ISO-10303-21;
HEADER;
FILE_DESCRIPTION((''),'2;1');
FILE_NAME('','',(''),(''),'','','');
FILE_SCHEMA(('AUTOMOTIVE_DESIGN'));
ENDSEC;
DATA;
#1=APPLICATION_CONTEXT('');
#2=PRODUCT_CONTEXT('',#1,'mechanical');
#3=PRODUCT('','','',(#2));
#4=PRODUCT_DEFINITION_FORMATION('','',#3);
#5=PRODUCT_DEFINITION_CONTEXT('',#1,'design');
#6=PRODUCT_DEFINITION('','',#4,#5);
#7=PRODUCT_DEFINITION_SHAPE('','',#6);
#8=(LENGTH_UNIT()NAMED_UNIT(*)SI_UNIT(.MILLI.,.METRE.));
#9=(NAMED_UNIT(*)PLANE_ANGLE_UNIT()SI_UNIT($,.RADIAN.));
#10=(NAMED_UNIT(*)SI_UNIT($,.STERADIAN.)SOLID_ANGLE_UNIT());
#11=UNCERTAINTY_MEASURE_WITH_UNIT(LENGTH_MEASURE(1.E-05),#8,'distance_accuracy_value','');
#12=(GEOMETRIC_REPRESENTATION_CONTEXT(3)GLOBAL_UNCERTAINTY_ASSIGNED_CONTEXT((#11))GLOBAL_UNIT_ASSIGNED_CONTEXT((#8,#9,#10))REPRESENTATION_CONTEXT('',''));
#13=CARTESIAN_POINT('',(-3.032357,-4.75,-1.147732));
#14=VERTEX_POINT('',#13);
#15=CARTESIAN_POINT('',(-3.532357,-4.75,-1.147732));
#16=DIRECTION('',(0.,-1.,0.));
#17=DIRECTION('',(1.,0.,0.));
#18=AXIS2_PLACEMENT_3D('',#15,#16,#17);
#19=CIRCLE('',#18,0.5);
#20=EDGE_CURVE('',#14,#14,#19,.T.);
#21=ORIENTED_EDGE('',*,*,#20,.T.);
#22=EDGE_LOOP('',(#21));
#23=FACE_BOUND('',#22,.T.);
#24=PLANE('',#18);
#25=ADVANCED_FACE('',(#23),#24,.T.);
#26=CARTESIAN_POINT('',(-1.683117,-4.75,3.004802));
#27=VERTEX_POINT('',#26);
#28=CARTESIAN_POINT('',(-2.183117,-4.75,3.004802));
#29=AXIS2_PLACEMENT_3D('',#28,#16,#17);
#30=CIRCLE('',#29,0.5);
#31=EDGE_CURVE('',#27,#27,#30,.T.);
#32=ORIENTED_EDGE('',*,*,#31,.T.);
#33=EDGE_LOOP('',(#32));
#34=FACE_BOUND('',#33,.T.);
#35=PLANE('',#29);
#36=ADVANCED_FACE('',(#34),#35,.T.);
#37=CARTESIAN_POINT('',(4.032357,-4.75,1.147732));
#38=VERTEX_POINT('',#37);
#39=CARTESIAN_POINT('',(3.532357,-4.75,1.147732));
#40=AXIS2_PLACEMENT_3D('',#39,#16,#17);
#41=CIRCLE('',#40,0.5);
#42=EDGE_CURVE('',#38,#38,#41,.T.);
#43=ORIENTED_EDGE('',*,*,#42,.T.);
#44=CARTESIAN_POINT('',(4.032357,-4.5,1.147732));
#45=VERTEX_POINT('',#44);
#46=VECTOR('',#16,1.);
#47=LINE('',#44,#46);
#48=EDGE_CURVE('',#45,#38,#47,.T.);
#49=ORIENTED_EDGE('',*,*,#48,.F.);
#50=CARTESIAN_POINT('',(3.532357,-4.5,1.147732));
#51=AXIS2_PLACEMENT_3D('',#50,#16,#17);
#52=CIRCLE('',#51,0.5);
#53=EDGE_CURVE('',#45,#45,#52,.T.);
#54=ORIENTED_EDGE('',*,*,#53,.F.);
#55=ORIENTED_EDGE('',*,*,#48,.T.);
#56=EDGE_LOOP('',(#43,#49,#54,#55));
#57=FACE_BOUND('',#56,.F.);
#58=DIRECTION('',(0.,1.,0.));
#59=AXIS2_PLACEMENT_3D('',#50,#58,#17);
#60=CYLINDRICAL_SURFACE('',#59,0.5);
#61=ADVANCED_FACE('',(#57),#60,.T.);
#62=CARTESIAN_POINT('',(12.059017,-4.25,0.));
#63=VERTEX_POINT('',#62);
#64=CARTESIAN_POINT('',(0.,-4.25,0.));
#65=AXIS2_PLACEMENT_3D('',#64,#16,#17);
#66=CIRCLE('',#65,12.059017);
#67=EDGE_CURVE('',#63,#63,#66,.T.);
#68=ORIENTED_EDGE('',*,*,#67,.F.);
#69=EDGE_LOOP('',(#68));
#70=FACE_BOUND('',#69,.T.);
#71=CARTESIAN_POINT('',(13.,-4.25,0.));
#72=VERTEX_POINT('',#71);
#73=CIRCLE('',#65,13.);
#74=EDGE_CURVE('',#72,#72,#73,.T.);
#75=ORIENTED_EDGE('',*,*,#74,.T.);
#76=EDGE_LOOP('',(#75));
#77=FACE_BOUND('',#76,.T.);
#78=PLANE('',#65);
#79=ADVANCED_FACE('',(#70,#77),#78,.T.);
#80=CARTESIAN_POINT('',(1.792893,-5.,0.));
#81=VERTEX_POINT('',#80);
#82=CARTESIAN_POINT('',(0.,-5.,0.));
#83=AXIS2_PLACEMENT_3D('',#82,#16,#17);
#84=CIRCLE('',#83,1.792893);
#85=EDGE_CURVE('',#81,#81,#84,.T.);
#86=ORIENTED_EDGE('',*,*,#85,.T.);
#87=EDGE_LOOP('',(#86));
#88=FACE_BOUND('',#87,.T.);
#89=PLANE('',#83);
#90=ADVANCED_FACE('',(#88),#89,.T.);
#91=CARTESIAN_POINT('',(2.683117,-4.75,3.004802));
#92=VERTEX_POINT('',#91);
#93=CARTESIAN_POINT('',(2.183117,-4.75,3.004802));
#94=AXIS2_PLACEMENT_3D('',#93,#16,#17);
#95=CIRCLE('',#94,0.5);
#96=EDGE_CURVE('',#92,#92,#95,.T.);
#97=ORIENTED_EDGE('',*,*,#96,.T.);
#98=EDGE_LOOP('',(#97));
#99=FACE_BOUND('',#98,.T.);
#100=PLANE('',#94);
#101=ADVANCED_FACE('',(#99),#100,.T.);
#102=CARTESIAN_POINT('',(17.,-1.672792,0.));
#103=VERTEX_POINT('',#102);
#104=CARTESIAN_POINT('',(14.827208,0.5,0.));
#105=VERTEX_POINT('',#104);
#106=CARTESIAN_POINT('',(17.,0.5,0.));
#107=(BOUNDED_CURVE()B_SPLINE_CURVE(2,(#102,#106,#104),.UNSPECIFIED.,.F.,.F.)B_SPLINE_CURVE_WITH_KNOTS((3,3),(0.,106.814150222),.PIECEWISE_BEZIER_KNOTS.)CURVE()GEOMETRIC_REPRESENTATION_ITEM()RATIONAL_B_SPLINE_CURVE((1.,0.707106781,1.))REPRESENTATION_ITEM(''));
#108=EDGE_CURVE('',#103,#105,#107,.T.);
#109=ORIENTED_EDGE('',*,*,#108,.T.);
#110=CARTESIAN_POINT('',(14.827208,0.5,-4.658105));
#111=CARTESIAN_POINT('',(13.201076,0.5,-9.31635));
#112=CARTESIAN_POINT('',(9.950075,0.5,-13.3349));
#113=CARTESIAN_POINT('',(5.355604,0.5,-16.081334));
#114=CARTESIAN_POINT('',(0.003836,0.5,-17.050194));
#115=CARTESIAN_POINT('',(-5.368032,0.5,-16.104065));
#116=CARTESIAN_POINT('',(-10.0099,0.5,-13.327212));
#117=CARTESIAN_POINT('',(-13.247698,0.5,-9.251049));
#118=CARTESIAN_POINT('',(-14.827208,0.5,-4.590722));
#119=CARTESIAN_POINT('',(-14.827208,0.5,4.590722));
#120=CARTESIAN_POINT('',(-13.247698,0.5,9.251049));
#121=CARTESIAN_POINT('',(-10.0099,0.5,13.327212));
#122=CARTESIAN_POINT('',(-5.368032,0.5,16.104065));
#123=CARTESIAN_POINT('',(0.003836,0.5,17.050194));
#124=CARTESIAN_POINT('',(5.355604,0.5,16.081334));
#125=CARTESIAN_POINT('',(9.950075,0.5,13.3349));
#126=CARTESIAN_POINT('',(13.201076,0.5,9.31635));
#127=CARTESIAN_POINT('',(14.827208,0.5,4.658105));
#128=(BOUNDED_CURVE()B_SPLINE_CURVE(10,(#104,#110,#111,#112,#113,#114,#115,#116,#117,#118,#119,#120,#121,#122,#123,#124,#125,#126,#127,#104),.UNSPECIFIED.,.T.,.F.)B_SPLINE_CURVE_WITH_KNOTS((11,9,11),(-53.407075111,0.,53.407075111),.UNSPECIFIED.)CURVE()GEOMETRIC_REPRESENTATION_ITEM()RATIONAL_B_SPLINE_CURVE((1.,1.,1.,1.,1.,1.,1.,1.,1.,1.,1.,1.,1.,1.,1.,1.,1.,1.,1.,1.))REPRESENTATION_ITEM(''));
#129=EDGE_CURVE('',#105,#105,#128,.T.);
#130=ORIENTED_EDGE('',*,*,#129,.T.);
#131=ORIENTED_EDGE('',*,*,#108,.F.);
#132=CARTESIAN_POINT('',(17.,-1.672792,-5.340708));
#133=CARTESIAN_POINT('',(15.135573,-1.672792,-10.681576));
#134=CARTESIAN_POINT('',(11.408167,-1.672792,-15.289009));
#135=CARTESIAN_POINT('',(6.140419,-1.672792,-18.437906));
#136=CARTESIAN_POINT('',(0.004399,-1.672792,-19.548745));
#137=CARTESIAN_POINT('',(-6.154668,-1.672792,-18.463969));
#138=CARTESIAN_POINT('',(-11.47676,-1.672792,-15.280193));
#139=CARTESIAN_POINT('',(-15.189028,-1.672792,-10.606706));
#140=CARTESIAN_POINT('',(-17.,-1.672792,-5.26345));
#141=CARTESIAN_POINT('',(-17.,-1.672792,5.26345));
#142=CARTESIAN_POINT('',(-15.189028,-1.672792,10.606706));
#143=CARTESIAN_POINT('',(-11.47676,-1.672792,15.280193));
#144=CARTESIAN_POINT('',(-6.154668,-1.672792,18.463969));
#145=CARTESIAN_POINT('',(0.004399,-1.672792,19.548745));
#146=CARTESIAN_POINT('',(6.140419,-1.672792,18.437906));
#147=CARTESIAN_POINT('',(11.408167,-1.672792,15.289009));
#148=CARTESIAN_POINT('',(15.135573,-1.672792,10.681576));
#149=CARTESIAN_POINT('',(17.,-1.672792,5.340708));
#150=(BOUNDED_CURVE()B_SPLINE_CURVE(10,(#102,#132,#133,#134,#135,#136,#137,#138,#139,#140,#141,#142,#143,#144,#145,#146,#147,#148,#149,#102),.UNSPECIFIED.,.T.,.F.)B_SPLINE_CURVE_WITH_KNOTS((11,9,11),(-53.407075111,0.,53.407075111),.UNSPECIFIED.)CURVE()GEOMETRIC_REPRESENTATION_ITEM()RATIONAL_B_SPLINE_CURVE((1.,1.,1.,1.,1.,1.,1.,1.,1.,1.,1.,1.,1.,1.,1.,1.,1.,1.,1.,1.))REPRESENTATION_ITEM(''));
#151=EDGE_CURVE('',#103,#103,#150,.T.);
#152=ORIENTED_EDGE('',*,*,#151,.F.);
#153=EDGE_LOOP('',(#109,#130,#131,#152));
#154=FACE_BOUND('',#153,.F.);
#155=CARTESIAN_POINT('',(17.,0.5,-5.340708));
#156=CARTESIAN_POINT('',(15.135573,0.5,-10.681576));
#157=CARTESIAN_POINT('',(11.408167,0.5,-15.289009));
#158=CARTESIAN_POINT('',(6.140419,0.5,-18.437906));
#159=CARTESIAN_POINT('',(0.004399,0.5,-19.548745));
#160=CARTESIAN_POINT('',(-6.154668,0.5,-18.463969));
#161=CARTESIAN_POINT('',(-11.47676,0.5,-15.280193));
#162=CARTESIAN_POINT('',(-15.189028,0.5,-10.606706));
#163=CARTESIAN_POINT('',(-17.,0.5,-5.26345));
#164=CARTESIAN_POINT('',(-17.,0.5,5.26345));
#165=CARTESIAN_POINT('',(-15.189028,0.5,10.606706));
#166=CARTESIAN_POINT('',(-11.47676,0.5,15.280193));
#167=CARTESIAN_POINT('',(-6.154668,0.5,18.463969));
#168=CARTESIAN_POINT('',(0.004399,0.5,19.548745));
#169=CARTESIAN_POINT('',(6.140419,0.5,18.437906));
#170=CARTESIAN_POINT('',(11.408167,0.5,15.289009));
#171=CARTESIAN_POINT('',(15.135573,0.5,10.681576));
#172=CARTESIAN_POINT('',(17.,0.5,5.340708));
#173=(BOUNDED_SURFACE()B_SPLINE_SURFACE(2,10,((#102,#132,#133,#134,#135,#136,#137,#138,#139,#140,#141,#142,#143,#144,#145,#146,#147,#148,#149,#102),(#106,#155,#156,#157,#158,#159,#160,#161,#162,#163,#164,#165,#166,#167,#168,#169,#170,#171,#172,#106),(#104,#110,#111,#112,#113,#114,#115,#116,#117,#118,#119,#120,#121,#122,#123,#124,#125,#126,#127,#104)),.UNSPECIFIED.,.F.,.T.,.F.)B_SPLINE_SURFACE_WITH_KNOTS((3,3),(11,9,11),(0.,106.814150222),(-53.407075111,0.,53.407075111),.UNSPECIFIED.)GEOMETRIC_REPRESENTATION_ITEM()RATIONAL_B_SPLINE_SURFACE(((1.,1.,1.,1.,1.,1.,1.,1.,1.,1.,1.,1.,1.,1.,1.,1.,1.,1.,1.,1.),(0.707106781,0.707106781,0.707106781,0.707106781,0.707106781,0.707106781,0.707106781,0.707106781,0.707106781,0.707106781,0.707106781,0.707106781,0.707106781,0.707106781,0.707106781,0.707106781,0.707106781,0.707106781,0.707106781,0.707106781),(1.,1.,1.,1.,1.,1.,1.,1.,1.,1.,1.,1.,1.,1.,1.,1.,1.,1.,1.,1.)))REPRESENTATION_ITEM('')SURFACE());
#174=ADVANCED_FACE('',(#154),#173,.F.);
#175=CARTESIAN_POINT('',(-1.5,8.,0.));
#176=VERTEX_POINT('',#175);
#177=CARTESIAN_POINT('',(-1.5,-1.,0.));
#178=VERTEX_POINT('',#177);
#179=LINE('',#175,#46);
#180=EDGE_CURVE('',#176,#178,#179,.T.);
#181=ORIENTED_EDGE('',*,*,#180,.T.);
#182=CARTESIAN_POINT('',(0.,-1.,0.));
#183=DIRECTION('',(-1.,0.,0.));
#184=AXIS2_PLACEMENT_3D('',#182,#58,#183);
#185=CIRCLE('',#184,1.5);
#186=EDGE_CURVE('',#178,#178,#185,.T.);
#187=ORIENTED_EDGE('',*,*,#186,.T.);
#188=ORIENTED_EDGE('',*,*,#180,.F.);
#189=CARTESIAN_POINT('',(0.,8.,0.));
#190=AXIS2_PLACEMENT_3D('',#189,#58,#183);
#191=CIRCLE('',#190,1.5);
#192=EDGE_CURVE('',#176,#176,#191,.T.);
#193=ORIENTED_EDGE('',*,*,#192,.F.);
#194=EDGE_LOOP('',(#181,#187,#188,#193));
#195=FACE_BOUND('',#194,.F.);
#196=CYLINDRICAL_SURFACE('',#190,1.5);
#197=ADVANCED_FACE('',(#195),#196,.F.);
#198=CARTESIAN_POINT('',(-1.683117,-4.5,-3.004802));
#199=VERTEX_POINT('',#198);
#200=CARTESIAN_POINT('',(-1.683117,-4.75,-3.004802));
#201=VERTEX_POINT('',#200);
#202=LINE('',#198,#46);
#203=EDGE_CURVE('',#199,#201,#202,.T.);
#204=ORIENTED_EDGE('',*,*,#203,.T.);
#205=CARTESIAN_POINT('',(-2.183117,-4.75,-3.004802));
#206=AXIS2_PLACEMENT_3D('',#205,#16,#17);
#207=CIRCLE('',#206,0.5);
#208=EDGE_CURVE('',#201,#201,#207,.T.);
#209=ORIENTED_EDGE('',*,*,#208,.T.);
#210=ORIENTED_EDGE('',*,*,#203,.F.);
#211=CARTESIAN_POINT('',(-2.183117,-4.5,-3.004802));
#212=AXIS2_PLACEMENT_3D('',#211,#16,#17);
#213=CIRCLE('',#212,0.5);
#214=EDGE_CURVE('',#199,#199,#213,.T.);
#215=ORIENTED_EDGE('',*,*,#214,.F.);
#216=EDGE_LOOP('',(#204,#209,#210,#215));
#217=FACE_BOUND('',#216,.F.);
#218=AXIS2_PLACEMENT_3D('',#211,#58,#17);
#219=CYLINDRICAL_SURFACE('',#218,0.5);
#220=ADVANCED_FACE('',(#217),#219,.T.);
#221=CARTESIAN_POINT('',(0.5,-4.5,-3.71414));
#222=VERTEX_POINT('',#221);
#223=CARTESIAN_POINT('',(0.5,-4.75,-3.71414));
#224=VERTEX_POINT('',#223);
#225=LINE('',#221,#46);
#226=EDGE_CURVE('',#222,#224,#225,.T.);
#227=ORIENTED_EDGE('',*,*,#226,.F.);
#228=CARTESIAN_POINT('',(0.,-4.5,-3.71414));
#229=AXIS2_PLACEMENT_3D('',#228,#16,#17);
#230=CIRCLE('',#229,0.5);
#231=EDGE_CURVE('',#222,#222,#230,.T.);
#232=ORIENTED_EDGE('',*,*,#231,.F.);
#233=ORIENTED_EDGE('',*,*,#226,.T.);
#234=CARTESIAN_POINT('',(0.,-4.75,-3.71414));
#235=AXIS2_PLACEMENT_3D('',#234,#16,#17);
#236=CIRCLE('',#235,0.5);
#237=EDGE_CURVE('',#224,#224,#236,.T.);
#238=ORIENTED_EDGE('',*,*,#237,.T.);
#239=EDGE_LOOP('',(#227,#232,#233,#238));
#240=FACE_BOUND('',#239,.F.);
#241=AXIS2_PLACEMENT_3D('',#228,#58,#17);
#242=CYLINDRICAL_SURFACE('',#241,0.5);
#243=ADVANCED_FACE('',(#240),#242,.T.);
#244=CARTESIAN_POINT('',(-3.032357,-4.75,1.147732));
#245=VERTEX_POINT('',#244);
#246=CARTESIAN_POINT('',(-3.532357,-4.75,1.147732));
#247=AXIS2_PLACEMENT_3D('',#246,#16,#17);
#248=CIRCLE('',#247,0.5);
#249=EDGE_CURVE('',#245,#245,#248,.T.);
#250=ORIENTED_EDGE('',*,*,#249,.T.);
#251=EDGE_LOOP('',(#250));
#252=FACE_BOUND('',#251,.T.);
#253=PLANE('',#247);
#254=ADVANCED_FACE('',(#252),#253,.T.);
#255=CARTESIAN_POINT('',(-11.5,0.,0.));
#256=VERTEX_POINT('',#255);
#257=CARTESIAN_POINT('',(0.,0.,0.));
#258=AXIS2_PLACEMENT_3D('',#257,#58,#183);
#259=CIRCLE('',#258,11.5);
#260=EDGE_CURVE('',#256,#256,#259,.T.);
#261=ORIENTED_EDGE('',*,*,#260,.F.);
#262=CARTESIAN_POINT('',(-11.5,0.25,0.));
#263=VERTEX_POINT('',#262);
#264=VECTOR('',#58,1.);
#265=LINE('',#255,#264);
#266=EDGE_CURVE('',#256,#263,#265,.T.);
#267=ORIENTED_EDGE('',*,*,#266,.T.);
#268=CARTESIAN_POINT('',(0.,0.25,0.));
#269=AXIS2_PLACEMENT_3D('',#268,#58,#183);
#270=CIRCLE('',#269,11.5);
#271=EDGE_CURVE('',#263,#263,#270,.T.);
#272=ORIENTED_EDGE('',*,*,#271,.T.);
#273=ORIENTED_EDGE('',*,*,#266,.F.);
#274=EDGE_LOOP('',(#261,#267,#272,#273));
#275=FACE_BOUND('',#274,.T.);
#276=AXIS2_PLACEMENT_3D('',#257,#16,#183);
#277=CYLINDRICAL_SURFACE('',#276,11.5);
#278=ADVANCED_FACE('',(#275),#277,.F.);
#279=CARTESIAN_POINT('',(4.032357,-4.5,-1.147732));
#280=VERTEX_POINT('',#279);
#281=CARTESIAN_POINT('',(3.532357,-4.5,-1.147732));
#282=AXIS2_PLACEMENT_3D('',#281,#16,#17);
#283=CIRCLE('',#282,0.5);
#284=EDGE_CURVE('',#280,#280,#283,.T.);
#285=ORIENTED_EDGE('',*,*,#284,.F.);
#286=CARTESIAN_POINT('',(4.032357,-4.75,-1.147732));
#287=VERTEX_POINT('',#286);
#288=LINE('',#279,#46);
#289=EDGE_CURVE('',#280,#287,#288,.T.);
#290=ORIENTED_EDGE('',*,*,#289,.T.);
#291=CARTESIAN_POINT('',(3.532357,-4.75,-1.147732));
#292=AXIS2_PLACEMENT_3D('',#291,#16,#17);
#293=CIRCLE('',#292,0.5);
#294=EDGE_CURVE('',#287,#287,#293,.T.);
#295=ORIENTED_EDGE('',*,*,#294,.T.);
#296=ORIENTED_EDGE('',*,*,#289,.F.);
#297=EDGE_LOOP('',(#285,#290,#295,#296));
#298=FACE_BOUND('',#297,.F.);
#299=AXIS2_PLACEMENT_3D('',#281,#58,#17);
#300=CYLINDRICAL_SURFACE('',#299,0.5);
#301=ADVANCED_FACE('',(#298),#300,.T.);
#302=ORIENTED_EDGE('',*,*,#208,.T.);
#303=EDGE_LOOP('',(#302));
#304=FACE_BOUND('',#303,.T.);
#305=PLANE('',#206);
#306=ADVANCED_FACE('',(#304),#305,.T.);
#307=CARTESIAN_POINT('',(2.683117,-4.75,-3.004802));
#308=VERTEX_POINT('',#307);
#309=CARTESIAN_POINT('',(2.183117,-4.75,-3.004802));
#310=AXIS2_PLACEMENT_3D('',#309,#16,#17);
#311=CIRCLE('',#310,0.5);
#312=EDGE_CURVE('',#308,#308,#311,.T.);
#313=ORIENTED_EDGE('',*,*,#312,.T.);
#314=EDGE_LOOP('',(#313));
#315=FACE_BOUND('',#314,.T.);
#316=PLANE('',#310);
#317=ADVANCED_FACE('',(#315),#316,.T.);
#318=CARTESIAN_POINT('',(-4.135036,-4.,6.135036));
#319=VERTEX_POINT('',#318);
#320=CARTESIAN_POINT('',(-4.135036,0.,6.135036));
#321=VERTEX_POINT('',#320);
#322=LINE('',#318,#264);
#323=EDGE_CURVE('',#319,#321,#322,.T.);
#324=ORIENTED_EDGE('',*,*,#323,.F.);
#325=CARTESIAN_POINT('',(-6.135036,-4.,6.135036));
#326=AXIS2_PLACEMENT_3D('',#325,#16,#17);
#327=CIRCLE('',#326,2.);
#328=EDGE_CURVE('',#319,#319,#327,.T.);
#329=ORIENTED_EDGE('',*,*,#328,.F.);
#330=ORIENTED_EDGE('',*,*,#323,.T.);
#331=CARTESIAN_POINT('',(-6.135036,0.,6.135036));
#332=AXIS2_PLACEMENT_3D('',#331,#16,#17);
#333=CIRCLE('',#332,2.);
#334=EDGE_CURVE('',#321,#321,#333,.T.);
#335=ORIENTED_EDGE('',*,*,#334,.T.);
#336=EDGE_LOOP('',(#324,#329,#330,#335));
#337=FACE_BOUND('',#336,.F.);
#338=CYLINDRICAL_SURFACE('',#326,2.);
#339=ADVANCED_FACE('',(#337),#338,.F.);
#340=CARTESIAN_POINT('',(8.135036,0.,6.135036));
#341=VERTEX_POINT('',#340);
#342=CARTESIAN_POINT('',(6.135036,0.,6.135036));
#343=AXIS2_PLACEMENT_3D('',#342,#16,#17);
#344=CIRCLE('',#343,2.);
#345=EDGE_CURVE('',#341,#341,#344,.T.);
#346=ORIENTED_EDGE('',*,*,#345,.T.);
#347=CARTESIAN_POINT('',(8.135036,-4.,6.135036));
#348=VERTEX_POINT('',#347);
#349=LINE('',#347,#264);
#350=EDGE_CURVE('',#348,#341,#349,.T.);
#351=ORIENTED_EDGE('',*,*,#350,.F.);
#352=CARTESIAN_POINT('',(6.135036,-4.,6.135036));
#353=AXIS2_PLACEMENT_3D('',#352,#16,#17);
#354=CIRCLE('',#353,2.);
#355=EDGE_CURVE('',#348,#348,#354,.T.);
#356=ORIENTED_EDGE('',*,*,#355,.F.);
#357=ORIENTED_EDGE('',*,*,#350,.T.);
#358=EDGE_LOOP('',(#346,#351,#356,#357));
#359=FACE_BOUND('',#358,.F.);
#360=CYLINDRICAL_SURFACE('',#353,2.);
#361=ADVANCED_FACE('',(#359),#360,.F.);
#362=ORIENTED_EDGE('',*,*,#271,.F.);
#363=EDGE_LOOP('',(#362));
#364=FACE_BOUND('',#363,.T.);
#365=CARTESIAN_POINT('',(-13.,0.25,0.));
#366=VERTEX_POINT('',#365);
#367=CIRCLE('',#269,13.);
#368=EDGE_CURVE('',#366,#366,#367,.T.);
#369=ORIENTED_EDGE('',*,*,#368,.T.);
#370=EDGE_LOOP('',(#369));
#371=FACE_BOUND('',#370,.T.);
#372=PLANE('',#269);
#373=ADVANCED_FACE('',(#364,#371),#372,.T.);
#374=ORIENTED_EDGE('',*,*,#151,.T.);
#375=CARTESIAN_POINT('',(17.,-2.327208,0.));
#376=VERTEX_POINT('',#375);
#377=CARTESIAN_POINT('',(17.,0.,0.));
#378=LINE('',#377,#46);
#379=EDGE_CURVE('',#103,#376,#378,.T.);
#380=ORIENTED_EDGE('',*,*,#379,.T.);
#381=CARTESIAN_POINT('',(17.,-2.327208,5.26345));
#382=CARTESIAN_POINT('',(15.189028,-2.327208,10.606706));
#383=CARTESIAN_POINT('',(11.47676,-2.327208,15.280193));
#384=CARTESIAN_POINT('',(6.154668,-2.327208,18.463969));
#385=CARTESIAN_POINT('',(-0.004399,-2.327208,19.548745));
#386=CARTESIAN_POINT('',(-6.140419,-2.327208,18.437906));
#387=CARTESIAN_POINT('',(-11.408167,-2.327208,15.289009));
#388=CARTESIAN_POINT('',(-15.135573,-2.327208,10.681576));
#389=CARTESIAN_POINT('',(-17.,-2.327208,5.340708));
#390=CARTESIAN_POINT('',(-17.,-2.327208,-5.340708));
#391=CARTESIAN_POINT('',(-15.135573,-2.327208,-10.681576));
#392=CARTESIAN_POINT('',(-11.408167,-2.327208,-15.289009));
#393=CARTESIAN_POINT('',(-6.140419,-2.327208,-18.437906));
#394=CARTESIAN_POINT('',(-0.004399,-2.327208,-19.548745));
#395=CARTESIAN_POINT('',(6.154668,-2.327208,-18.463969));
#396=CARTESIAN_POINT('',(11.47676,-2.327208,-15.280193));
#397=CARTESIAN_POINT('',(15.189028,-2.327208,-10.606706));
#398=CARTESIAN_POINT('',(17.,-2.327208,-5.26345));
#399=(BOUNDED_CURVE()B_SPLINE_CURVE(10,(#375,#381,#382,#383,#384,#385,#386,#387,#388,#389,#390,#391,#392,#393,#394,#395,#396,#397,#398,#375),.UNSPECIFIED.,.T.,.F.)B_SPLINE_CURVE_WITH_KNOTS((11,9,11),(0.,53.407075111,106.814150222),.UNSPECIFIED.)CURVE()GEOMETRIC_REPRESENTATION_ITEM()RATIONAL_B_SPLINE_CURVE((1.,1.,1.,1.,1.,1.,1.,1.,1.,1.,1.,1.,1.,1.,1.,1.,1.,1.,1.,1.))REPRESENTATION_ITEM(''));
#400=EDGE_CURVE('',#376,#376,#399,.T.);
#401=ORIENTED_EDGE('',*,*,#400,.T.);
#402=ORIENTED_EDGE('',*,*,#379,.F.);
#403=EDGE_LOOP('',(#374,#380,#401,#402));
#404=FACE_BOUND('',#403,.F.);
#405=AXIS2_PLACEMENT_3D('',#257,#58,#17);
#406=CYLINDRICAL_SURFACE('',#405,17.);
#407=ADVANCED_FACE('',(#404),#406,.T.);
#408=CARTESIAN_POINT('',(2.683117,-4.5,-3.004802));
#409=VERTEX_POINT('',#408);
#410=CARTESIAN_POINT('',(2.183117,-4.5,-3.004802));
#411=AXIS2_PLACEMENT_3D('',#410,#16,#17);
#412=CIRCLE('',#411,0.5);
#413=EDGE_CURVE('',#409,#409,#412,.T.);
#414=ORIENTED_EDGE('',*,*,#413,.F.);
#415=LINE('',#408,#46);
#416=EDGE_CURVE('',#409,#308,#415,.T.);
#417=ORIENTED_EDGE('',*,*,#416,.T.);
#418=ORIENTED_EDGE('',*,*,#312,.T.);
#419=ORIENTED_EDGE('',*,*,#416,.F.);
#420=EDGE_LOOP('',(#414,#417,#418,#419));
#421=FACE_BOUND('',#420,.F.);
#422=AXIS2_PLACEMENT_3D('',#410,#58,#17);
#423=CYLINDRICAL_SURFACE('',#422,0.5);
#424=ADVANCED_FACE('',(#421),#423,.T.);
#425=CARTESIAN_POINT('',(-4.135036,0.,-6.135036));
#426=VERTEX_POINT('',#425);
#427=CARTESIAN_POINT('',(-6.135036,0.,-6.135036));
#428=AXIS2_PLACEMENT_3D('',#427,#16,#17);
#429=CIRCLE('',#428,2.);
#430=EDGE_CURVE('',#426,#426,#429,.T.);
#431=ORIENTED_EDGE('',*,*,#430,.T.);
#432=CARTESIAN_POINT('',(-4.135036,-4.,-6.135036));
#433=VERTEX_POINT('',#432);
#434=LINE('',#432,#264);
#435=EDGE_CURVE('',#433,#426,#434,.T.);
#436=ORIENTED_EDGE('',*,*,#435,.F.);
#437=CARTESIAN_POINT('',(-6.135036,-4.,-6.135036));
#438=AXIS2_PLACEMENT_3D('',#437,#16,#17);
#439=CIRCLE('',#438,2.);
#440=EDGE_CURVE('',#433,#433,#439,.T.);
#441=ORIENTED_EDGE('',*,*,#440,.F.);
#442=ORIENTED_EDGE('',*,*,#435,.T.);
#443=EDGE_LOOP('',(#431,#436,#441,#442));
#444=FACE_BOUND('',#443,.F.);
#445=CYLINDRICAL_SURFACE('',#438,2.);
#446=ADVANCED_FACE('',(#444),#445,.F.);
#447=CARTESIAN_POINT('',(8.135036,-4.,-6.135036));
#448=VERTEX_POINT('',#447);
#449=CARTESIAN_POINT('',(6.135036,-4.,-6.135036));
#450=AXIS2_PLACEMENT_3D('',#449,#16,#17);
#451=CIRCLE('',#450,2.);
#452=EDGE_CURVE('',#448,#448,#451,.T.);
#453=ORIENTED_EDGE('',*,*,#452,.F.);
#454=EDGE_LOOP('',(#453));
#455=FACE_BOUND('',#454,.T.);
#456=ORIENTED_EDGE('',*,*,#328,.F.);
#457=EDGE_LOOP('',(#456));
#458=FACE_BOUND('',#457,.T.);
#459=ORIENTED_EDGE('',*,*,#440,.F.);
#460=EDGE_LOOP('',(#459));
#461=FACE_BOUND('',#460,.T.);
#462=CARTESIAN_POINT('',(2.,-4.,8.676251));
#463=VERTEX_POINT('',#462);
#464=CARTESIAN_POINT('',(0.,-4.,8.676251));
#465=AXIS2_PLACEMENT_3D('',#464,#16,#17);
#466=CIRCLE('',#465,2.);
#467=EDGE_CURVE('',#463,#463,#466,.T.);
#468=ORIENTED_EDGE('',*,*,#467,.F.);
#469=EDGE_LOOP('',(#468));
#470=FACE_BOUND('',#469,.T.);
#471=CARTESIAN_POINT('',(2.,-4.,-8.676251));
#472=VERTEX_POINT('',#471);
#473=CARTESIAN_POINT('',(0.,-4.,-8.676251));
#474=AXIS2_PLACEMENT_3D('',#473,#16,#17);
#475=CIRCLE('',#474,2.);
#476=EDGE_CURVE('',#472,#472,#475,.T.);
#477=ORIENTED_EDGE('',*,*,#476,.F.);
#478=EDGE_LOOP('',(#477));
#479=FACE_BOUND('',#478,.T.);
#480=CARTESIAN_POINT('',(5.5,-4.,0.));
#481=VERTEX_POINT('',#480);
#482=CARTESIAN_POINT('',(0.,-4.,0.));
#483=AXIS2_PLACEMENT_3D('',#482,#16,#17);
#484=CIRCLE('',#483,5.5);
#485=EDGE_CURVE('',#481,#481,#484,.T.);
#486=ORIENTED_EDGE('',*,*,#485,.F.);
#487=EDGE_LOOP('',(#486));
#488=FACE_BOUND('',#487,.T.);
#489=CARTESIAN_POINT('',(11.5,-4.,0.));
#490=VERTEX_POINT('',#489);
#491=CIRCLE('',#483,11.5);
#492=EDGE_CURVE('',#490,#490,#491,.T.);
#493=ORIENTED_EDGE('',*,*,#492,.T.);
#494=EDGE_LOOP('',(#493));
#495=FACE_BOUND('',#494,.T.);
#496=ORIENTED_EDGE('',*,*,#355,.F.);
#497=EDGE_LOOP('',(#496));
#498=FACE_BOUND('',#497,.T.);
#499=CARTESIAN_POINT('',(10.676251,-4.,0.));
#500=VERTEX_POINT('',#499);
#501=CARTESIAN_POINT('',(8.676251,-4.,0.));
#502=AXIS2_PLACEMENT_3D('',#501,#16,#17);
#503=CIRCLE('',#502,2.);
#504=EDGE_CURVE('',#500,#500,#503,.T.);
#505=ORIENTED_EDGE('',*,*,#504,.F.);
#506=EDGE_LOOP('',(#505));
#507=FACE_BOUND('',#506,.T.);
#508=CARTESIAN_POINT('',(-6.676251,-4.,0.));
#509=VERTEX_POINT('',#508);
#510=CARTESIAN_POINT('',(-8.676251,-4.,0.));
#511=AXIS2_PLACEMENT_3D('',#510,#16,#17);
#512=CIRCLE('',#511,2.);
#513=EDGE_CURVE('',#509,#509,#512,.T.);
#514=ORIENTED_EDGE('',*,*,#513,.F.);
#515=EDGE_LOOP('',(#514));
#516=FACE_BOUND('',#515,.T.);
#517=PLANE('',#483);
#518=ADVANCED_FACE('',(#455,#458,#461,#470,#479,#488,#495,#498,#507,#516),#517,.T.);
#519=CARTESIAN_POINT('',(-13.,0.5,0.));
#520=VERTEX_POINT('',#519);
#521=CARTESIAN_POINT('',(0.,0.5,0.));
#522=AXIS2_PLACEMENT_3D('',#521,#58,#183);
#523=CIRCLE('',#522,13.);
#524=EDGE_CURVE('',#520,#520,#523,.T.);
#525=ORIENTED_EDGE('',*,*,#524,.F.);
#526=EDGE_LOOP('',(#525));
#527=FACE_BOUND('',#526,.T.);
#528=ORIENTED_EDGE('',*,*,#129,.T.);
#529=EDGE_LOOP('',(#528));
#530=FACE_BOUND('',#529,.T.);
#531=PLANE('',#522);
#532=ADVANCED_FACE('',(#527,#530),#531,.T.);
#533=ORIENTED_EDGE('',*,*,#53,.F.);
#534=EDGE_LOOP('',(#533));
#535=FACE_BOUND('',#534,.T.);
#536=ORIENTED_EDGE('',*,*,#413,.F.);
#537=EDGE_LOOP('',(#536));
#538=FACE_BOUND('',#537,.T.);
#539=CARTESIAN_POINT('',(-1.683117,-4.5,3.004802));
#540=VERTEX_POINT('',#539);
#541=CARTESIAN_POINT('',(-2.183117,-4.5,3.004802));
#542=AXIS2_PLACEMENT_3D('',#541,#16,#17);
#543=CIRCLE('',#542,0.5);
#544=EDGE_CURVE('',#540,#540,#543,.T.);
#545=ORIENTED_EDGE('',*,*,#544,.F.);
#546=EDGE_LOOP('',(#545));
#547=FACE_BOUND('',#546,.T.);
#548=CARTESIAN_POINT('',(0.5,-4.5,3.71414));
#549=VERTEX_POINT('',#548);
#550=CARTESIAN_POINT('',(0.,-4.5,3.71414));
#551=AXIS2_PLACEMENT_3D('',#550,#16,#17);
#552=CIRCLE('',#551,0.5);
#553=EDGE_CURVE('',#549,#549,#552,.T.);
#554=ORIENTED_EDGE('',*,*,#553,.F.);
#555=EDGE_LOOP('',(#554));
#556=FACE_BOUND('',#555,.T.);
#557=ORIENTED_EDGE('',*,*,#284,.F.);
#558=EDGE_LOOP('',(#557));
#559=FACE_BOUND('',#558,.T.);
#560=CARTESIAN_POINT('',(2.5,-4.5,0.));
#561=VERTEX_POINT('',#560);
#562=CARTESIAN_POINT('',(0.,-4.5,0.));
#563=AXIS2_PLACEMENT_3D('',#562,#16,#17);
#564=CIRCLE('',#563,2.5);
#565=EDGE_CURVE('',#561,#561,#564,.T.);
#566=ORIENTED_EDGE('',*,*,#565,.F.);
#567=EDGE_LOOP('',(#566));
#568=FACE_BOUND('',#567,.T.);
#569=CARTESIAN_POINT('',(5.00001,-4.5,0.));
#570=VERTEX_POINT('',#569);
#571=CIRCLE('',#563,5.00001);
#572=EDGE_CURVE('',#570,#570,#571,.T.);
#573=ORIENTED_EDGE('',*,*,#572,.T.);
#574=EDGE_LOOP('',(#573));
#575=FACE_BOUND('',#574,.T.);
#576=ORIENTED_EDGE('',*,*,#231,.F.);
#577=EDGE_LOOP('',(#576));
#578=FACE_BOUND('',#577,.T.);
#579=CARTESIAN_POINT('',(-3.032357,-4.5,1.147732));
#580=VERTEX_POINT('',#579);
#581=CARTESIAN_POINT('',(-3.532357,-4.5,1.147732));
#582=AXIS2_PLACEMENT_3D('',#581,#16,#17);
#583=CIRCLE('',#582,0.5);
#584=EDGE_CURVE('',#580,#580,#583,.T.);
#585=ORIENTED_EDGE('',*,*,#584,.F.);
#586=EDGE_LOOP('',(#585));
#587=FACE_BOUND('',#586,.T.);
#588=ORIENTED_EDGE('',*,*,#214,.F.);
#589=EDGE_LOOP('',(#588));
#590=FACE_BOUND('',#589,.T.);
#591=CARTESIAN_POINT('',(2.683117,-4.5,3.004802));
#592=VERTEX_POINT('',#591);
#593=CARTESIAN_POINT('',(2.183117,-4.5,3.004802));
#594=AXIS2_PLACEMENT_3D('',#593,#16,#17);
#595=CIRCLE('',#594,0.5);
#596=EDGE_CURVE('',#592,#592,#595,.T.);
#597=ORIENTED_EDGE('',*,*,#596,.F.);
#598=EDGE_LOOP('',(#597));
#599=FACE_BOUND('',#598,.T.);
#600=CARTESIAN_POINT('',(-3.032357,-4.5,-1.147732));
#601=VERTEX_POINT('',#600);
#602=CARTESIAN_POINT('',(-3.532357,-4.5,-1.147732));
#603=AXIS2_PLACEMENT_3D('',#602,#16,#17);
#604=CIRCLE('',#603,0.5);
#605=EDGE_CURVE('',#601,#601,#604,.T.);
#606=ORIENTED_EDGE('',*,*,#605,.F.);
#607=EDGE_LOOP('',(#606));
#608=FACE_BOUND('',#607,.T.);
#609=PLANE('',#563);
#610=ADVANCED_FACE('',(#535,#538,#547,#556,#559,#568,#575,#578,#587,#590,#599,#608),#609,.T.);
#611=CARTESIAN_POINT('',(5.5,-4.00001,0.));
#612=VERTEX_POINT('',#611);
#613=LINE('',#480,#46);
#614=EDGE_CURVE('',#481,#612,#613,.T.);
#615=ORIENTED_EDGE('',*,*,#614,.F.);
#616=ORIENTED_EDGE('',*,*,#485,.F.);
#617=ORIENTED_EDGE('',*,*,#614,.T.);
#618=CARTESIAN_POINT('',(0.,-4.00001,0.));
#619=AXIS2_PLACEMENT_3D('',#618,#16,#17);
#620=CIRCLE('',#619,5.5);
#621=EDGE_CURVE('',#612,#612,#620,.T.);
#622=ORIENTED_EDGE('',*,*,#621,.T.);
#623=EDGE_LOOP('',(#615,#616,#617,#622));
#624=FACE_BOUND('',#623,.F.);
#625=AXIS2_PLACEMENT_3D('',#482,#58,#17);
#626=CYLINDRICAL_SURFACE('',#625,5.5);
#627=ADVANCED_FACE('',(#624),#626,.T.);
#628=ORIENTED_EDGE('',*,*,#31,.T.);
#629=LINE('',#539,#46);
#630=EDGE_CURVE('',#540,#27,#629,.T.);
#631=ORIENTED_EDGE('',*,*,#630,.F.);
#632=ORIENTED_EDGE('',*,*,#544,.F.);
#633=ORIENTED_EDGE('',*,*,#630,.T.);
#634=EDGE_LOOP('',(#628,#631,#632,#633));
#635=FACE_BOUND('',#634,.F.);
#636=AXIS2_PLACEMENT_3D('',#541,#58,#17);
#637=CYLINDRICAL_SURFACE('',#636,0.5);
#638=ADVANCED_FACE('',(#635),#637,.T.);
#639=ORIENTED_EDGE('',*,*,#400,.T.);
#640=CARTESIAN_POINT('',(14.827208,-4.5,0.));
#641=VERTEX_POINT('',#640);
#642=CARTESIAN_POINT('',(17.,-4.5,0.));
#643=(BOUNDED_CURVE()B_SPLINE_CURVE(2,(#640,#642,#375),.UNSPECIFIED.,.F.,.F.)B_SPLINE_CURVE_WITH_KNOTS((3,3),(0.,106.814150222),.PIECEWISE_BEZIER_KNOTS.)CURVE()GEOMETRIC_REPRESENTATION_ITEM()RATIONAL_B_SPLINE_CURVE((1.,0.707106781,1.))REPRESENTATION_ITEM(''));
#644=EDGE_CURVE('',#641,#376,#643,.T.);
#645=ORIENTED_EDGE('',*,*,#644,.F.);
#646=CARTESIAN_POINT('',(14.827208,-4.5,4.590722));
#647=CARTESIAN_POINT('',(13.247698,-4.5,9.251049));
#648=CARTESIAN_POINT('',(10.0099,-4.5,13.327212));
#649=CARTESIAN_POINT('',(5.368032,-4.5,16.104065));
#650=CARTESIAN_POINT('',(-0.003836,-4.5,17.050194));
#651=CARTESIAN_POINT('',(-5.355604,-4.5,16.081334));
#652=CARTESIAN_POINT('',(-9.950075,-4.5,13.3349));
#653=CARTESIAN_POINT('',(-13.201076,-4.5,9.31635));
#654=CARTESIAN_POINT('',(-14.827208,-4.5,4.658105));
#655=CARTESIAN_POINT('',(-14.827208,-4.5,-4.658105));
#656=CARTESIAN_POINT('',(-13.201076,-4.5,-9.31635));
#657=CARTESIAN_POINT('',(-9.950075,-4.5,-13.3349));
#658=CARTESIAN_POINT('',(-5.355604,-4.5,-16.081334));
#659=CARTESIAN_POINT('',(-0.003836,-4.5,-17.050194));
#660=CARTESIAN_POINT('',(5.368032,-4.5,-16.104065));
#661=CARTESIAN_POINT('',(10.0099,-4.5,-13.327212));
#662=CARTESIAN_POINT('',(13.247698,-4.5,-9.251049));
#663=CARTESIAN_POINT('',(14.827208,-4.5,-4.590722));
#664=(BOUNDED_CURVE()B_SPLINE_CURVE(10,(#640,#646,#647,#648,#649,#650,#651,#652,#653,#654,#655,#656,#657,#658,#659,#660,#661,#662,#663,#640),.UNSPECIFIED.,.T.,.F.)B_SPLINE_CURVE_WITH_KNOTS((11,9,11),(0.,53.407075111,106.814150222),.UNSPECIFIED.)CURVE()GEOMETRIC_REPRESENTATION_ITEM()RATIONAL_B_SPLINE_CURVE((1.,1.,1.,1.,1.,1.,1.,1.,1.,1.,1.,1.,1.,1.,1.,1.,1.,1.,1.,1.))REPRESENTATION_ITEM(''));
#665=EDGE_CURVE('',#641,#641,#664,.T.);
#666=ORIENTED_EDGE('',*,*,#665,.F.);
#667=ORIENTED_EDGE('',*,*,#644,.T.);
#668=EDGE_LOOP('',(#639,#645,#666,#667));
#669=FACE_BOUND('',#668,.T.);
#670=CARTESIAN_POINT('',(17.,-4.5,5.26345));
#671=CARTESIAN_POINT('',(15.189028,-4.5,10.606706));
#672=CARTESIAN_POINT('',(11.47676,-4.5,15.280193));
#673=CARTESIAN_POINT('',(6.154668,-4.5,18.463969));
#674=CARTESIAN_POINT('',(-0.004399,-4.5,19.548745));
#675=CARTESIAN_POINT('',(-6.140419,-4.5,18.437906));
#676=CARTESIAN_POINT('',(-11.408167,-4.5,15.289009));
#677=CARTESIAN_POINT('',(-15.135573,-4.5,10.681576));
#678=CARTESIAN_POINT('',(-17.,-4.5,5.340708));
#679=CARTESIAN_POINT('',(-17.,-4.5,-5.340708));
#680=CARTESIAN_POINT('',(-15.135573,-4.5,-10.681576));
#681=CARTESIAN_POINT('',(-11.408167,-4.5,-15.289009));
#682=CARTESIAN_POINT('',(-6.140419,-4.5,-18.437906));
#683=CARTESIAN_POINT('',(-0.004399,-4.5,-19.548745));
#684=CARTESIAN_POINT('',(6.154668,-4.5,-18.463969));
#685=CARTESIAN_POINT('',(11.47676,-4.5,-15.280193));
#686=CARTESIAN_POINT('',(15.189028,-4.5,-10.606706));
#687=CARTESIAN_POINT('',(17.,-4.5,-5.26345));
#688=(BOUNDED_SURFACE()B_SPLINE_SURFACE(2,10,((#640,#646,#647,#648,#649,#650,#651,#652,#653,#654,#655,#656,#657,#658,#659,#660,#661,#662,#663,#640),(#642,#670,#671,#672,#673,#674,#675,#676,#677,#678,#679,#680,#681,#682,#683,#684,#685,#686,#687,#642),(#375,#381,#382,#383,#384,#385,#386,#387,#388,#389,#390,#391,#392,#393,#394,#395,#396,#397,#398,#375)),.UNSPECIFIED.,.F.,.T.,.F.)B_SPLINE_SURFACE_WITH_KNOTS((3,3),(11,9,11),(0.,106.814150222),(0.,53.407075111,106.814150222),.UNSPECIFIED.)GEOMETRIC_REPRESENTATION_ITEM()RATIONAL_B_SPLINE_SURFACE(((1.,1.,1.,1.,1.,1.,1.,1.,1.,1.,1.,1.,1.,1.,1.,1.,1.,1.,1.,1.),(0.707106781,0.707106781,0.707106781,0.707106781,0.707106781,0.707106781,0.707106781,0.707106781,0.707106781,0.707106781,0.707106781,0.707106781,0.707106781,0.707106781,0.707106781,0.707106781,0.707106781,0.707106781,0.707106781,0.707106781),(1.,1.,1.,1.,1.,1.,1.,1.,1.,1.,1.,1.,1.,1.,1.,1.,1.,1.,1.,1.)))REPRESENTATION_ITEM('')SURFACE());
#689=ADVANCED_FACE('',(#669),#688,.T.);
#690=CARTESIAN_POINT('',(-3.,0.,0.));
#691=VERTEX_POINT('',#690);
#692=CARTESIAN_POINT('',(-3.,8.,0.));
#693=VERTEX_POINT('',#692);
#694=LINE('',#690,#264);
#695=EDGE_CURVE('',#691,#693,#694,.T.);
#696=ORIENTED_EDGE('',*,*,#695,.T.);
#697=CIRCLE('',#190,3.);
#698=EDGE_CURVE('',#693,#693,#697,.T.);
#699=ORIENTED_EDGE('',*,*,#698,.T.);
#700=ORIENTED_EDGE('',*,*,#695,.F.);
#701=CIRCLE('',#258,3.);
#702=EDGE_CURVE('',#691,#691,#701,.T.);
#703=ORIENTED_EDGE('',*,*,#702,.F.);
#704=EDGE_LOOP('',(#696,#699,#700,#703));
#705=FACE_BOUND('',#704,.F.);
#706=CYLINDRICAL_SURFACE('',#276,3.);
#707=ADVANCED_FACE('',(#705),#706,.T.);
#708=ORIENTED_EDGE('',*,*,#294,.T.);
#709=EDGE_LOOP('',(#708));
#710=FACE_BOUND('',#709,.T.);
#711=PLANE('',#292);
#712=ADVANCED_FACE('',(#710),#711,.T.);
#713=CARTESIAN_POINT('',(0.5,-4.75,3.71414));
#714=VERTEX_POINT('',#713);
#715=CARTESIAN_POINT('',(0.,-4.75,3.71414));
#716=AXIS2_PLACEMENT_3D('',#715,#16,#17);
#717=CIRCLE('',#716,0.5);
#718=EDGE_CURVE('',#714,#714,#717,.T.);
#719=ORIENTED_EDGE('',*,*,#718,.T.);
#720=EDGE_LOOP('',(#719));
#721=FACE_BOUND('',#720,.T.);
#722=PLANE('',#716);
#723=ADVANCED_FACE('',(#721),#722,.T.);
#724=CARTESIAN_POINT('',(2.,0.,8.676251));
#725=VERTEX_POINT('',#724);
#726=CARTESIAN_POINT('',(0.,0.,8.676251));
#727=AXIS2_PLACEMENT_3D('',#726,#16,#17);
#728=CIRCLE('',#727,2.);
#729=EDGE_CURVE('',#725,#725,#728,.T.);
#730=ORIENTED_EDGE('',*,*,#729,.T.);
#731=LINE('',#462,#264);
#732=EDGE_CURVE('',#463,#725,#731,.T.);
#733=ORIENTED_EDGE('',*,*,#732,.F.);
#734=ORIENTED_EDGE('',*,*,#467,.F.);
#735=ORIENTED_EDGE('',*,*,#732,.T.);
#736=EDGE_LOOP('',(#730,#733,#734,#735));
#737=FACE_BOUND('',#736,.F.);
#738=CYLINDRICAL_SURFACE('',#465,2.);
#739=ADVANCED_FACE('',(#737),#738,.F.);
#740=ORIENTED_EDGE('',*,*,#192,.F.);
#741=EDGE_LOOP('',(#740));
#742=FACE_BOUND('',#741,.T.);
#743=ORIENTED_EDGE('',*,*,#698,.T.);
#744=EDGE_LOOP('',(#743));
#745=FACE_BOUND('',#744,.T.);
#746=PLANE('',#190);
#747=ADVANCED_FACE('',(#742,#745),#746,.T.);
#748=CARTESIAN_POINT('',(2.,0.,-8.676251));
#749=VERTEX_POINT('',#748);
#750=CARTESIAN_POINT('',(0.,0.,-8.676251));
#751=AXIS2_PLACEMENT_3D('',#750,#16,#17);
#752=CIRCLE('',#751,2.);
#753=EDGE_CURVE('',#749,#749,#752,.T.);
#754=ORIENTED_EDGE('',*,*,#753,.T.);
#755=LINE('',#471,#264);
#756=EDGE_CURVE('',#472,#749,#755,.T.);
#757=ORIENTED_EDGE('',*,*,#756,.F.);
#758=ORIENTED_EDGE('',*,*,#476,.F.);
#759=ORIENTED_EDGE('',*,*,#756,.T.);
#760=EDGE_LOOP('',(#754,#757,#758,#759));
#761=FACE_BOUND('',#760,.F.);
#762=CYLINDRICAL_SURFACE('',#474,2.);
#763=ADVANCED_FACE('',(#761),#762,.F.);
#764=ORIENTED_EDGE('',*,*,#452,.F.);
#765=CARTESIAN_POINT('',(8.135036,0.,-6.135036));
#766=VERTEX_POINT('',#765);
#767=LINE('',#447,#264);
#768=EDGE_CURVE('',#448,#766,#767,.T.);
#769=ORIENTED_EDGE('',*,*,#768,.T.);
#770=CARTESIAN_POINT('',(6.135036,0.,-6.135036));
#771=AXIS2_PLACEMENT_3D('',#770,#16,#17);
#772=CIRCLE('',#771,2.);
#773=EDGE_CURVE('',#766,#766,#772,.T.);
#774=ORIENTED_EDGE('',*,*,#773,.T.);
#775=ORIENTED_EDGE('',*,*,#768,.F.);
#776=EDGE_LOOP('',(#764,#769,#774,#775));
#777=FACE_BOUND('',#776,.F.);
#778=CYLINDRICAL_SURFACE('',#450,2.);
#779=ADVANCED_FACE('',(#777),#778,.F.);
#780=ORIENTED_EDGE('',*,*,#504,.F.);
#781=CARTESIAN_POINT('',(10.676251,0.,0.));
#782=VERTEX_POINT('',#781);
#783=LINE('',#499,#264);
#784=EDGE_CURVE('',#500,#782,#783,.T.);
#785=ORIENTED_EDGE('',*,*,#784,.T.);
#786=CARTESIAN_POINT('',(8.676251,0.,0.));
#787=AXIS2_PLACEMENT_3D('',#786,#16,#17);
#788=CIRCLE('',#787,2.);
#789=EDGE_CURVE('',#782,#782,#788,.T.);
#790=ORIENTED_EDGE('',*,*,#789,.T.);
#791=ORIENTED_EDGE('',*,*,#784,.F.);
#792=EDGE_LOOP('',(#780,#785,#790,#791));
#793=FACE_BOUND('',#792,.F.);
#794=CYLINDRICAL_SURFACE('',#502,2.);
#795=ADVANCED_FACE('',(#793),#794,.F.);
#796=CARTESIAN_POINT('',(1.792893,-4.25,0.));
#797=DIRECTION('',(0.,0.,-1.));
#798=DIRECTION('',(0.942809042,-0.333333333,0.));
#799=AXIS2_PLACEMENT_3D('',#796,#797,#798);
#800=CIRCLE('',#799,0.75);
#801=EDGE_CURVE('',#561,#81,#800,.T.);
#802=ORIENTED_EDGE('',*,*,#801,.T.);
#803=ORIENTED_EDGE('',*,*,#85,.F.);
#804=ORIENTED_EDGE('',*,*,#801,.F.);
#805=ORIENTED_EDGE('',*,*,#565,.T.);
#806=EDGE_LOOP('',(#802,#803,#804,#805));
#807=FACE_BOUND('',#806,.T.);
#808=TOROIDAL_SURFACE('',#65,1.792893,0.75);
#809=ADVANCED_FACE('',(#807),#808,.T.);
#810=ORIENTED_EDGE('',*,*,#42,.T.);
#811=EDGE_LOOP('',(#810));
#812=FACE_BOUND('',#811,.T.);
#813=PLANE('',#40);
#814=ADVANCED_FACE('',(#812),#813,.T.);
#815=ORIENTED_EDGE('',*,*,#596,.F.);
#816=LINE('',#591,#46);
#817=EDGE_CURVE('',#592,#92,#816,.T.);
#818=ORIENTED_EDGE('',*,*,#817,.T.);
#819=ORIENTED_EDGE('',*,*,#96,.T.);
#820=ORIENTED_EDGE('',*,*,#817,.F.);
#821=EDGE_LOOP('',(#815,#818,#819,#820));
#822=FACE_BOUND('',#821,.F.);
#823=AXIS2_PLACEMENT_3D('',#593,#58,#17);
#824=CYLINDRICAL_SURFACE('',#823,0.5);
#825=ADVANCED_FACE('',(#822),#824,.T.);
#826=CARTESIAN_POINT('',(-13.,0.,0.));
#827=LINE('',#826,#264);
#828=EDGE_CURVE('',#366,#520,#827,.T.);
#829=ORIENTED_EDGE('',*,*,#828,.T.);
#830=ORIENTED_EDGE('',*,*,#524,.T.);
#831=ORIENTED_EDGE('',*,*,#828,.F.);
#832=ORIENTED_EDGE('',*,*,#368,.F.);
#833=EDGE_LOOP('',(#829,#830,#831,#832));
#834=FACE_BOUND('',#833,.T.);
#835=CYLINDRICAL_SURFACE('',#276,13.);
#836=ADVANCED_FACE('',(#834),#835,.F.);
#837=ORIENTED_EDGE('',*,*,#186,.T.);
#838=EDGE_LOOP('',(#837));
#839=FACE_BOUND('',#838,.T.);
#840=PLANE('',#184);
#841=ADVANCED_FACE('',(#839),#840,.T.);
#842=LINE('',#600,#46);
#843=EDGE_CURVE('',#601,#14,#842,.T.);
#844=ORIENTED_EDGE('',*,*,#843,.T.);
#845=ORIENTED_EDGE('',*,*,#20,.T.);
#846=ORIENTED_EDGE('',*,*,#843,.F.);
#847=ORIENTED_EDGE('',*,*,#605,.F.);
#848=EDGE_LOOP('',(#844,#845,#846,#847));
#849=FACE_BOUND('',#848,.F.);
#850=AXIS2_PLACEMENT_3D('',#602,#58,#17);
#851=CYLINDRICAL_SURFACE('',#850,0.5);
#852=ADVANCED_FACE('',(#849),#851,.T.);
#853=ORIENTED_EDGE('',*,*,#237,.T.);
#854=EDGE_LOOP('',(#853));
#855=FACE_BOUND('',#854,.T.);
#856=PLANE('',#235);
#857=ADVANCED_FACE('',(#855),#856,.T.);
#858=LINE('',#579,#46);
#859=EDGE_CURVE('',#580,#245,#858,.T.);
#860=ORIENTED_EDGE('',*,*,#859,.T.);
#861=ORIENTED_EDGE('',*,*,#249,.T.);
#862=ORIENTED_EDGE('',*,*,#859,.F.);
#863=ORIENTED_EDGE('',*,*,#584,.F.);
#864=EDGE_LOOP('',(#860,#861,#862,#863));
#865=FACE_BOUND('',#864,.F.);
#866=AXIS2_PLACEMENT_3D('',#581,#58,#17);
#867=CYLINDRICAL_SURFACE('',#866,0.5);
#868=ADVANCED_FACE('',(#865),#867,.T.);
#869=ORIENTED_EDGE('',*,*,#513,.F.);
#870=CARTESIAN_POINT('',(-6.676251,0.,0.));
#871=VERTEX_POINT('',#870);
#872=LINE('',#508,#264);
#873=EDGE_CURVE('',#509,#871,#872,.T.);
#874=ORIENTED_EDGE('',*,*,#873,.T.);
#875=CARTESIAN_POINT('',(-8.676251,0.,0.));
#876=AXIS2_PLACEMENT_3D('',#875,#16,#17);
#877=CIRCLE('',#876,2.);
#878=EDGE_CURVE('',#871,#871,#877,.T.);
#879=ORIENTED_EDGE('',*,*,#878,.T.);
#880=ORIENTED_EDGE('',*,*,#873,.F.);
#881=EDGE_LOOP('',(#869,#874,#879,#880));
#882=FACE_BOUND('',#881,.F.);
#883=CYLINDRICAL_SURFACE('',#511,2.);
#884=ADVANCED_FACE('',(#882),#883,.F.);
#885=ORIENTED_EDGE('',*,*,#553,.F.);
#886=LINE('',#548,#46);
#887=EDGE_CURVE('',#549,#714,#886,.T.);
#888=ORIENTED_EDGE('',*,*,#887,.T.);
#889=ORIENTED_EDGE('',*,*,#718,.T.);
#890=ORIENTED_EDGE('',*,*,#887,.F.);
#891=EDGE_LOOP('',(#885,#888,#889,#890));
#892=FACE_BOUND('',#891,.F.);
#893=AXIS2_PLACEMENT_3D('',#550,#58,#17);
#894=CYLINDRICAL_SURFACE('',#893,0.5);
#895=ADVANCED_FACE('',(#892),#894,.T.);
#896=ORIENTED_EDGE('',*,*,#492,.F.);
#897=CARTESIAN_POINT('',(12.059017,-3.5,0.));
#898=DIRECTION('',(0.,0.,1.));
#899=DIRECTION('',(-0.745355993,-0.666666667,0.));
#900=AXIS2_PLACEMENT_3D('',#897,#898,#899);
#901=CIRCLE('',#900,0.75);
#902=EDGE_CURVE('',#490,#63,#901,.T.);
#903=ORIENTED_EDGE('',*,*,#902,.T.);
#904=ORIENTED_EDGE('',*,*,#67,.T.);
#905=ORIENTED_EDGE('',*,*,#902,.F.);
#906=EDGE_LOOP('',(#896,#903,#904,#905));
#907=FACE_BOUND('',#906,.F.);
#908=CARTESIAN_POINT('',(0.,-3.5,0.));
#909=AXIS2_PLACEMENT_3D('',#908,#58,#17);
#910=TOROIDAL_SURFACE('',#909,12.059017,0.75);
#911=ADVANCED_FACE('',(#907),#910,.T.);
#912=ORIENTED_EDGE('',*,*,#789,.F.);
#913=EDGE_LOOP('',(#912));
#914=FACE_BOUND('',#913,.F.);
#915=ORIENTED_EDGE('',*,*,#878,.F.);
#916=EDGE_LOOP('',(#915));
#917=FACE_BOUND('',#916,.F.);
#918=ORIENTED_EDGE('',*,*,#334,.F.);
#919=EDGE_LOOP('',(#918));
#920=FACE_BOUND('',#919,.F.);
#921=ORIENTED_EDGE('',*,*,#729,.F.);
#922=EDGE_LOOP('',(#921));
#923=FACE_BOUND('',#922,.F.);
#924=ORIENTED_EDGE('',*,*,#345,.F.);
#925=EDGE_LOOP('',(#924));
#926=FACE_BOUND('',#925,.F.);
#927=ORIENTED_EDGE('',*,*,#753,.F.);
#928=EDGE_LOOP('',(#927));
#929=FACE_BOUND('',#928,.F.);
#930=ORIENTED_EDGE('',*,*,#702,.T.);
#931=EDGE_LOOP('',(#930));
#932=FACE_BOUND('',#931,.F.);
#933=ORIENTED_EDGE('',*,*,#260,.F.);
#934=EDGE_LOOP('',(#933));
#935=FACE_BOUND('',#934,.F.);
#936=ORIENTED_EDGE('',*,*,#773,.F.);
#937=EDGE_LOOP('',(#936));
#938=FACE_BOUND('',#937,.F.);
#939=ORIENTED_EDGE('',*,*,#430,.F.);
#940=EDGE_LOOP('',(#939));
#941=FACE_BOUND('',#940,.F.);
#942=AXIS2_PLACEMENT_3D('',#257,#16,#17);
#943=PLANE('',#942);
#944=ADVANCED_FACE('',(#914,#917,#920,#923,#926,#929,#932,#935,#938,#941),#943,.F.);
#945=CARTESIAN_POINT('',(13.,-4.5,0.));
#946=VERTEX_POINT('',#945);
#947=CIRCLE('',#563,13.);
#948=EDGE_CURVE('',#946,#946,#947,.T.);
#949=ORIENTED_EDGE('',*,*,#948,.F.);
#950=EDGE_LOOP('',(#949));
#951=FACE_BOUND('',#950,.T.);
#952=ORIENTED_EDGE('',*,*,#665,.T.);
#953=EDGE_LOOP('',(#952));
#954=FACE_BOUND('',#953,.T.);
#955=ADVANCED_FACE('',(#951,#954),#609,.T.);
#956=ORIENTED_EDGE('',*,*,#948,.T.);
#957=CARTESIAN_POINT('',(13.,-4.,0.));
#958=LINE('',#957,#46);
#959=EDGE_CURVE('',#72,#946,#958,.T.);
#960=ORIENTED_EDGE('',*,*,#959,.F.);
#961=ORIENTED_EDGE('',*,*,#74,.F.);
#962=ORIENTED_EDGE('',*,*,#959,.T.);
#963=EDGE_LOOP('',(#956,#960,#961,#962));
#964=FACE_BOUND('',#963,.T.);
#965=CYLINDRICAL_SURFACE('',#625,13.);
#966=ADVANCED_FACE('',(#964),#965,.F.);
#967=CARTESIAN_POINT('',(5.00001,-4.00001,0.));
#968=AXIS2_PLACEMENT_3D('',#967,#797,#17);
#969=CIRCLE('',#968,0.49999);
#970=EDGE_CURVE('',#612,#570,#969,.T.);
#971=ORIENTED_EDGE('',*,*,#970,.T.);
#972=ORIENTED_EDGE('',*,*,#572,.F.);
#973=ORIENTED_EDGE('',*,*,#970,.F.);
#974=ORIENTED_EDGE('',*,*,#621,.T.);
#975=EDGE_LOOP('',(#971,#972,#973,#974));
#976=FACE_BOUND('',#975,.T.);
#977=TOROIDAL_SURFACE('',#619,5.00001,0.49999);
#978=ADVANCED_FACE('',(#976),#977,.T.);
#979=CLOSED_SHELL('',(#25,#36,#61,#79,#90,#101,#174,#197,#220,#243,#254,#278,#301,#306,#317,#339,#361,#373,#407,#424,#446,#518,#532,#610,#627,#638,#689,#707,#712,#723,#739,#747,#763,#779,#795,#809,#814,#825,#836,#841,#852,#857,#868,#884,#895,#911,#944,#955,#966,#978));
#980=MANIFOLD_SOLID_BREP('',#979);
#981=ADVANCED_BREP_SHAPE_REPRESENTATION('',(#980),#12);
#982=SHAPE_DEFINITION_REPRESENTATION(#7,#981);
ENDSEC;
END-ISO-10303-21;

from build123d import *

# Parameters (mm, degrees)
F0_R      = 17
F1_DEPTH  = 4
F2_R      = 2
F3_DEPTH  = 25
F5_R      = 5.5
F6_DEPTH  = 0.5
F7_R      = 2.5
F8_DEPTH  = 0.5
F9_R      = 0.5
F10_DEPTH = 0.25
F11_R     = 17
F11_R_2   = 13
F12_DEPTH = 0.5
F13_R     = 13
F13_R_2   = 11.5
F14_DEPTH = 0.25
F4_R      = 17
F4_R_2    = 13
F15_DEPTH = 0.5
F16_R     = 13
F16_R_2   = 11.5
F17_DEPTH = 0.25
F18_R     = 2.1727922061
F19_R     = 3
F20_DEPTH = 8
F21_R     = 1.5
F22_DEPTH = 9
F24_R     = 0.49999


# Not quite as in the source:
# - a fillet or chamfer that OpenCascade refuses, or shapes differently, is made with other operations: its cross-section is extruded or revolved along the edge and cut away or added
# - a fillet or chamfer is up to 0.001 mm smaller than in the source, because OpenCascade refuses the exact size


with BuildPart() as f1:
    # F0 (on Front) → F1 (new body)
    with BuildSketch(Plane.XZ):
        Circle(F0_R)
    extrude(amount=F1_DEPTH)

    # F2 (on face) → F3 (cut)
    with BuildSketch(Plane.XZ.offset(4)):
        with Locations((0, 8.6762513965)):
            Circle(F2_R)
        with Locations((-6.1350361978, 6.1350361978)):
            Circle(F2_R)
        with Locations((-8.6762513965, 0)):
            Circle(F2_R)
        with Locations((-6.1350361978, -6.1350361978)):
            Circle(F2_R)
        with Locations((0, -8.6762513965)):
            Circle(F2_R)
        with Locations((6.1350361978, -6.1350361978)):
            Circle(F2_R)
        with Locations((8.6762513965, 0)):
            Circle(F2_R)
        with Locations((6.1350361978, 6.1350361978)):
            Circle(F2_R)
    extrude(amount=-F3_DEPTH, mode=Mode.SUBTRACT)

    # F5 (on face) → F6 (join)
    with BuildSketch(Plane.XZ.offset(4)):
        Circle(F5_R)
    extrude(amount=F6_DEPTH)

    # F7 (on face) → F8 (join)
    with BuildSketch(Plane.XZ.offset(4.5)):
        Circle(F7_R)
    extrude(amount=F8_DEPTH)

    # F9 (on face) → F10 (join)
    with BuildSketch(Plane.XZ.offset(4.5)):
        with Locations((0, 3.7141400389)):
            Circle(F9_R)
        with Locations((-2.1831167398, 3.004802411)):
            Circle(F9_R)
        with Locations((-3.5323570865, 1.1477323915)):
            Circle(F9_R)
        with Locations((-3.5323570865, -1.1477323915)):
            Circle(F9_R)
        with Locations((-2.1831167398, -3.004802411)):
            Circle(F9_R)
        with Locations((0, -3.7141400389)):
            Circle(F9_R)
        with Locations((2.1831167398, -3.004802411)):
            Circle(F9_R)
        with Locations((3.5323570865, -1.1477323915)):
            Circle(F9_R)
        with Locations((3.5323570865, 1.1477323915)):
            Circle(F9_R)
        with Locations((2.1831167398, 3.004802411)):
            Circle(F9_R)
    extrude(amount=F10_DEPTH)

    # F11 (on face) → F12 (join)
    with BuildSketch(Plane(origin=(0, 0, 0), x_dir=(-1, 0, 0), z_dir=(0, 1, 0))):
        Circle(F11_R)
        Circle(F11_R_2, mode=Mode.SUBTRACT)
    extrude(amount=F12_DEPTH)

    # F13 (on face) → F14 (join)
    with BuildSketch(Plane(origin=(0, 0, 0), x_dir=(-1, 0, 0), z_dir=(0, 1, 0))):
        Circle(F13_R)
        Circle(F13_R_2, mode=Mode.SUBTRACT)
    extrude(amount=F14_DEPTH)

    # F4 (on face) → F15 (join)
    with BuildSketch(Plane.XZ.offset(4)):
        Circle(F4_R)
        Circle(F4_R_2, mode=Mode.SUBTRACT)
    extrude(amount=F15_DEPTH)

    # F16 (on face) → F17 (join)
    with BuildSketch(Plane.XZ.offset(4)):
        Circle(F16_R)
        Circle(F16_R_2, mode=Mode.SUBTRACT)
    extrude(amount=F17_DEPTH)

    # F18
    f18_edges = [f1.edges().sort_by_distance(p)[0] for p in [
        (-17, -4.5, 0),
        (17, -2, 0),
        (-17, -4, 0),
        (0, 0, 17),
        (0, 0, -17),
        (-17, 0.25, 0),
        (17, 0.5, 0),
        (17, -4.25, 0),
    ]]
    fillet(f18_edges, radius=F18_R)

    # F19 (on face) → F20 (join)
    with BuildSketch(Plane(origin=(0, 0, 0), x_dir=(-1, 0, 0), z_dir=(0, 1, 0))):
        Circle(F19_R)
    extrude(amount=F20_DEPTH)

    # F21 (on face) → F22 (cut)
    with BuildSketch(Plane(origin=(0, 8, 0), x_dir=(-1, 0, 0), z_dir=(0, 1, 0))):
        Circle(F21_R)
    extrude(amount=-F22_DEPTH, mode=Mode.SUBTRACT)

    # F23: fillet of radius 0.75 on 1 edges, made by hand

    # F23_s1 → F23_t2 (revolve, cut)
    with BuildSketch(Plane.XY):
        with BuildLine():
            ThreePointArc((2.5, -4.5), (2.2259059207, -4.8623724357), (1.7928932188, -5))
            Line((1.7928932188, -5), (2.5, -5))
            Line((2.5, -5), (2.5, -4.5))
        make_face()
    revolve(axis=Axis((0, -5, 0), (0, -1, 0)), mode=Mode.SUBTRACT)

    # F24 (radius 0.5 in the source; OpenCascade refuses exactly that, so slightly less here)
    f24_edges = [f1.edges().sort_by_distance(p)[0] for p in [
        (-5.5, -4.5, 0),
    ]]
    fillet(f24_edges, radius=F24_R)

    # F25: fillet of radius 0.75 on 1 edges, made by hand

    # F25_s1 → F25_t2 (revolve, cut)
    with BuildSketch(Plane.XY):
        with BuildLine():
            ThreePointArc((11.5, -4), (11.7528307765, -4.1846531969), (12.0590169944, -4.25))
            Line((12.0590169944, -4.25), (11.5, -4.25))
            Line((11.5, -4.25), (11.5, -4))
        make_face()
    revolve(axis=Axis((0, -4.25, 0), (0, -1, 0)), mode=Mode.SUBTRACT)


solid = f1.part
